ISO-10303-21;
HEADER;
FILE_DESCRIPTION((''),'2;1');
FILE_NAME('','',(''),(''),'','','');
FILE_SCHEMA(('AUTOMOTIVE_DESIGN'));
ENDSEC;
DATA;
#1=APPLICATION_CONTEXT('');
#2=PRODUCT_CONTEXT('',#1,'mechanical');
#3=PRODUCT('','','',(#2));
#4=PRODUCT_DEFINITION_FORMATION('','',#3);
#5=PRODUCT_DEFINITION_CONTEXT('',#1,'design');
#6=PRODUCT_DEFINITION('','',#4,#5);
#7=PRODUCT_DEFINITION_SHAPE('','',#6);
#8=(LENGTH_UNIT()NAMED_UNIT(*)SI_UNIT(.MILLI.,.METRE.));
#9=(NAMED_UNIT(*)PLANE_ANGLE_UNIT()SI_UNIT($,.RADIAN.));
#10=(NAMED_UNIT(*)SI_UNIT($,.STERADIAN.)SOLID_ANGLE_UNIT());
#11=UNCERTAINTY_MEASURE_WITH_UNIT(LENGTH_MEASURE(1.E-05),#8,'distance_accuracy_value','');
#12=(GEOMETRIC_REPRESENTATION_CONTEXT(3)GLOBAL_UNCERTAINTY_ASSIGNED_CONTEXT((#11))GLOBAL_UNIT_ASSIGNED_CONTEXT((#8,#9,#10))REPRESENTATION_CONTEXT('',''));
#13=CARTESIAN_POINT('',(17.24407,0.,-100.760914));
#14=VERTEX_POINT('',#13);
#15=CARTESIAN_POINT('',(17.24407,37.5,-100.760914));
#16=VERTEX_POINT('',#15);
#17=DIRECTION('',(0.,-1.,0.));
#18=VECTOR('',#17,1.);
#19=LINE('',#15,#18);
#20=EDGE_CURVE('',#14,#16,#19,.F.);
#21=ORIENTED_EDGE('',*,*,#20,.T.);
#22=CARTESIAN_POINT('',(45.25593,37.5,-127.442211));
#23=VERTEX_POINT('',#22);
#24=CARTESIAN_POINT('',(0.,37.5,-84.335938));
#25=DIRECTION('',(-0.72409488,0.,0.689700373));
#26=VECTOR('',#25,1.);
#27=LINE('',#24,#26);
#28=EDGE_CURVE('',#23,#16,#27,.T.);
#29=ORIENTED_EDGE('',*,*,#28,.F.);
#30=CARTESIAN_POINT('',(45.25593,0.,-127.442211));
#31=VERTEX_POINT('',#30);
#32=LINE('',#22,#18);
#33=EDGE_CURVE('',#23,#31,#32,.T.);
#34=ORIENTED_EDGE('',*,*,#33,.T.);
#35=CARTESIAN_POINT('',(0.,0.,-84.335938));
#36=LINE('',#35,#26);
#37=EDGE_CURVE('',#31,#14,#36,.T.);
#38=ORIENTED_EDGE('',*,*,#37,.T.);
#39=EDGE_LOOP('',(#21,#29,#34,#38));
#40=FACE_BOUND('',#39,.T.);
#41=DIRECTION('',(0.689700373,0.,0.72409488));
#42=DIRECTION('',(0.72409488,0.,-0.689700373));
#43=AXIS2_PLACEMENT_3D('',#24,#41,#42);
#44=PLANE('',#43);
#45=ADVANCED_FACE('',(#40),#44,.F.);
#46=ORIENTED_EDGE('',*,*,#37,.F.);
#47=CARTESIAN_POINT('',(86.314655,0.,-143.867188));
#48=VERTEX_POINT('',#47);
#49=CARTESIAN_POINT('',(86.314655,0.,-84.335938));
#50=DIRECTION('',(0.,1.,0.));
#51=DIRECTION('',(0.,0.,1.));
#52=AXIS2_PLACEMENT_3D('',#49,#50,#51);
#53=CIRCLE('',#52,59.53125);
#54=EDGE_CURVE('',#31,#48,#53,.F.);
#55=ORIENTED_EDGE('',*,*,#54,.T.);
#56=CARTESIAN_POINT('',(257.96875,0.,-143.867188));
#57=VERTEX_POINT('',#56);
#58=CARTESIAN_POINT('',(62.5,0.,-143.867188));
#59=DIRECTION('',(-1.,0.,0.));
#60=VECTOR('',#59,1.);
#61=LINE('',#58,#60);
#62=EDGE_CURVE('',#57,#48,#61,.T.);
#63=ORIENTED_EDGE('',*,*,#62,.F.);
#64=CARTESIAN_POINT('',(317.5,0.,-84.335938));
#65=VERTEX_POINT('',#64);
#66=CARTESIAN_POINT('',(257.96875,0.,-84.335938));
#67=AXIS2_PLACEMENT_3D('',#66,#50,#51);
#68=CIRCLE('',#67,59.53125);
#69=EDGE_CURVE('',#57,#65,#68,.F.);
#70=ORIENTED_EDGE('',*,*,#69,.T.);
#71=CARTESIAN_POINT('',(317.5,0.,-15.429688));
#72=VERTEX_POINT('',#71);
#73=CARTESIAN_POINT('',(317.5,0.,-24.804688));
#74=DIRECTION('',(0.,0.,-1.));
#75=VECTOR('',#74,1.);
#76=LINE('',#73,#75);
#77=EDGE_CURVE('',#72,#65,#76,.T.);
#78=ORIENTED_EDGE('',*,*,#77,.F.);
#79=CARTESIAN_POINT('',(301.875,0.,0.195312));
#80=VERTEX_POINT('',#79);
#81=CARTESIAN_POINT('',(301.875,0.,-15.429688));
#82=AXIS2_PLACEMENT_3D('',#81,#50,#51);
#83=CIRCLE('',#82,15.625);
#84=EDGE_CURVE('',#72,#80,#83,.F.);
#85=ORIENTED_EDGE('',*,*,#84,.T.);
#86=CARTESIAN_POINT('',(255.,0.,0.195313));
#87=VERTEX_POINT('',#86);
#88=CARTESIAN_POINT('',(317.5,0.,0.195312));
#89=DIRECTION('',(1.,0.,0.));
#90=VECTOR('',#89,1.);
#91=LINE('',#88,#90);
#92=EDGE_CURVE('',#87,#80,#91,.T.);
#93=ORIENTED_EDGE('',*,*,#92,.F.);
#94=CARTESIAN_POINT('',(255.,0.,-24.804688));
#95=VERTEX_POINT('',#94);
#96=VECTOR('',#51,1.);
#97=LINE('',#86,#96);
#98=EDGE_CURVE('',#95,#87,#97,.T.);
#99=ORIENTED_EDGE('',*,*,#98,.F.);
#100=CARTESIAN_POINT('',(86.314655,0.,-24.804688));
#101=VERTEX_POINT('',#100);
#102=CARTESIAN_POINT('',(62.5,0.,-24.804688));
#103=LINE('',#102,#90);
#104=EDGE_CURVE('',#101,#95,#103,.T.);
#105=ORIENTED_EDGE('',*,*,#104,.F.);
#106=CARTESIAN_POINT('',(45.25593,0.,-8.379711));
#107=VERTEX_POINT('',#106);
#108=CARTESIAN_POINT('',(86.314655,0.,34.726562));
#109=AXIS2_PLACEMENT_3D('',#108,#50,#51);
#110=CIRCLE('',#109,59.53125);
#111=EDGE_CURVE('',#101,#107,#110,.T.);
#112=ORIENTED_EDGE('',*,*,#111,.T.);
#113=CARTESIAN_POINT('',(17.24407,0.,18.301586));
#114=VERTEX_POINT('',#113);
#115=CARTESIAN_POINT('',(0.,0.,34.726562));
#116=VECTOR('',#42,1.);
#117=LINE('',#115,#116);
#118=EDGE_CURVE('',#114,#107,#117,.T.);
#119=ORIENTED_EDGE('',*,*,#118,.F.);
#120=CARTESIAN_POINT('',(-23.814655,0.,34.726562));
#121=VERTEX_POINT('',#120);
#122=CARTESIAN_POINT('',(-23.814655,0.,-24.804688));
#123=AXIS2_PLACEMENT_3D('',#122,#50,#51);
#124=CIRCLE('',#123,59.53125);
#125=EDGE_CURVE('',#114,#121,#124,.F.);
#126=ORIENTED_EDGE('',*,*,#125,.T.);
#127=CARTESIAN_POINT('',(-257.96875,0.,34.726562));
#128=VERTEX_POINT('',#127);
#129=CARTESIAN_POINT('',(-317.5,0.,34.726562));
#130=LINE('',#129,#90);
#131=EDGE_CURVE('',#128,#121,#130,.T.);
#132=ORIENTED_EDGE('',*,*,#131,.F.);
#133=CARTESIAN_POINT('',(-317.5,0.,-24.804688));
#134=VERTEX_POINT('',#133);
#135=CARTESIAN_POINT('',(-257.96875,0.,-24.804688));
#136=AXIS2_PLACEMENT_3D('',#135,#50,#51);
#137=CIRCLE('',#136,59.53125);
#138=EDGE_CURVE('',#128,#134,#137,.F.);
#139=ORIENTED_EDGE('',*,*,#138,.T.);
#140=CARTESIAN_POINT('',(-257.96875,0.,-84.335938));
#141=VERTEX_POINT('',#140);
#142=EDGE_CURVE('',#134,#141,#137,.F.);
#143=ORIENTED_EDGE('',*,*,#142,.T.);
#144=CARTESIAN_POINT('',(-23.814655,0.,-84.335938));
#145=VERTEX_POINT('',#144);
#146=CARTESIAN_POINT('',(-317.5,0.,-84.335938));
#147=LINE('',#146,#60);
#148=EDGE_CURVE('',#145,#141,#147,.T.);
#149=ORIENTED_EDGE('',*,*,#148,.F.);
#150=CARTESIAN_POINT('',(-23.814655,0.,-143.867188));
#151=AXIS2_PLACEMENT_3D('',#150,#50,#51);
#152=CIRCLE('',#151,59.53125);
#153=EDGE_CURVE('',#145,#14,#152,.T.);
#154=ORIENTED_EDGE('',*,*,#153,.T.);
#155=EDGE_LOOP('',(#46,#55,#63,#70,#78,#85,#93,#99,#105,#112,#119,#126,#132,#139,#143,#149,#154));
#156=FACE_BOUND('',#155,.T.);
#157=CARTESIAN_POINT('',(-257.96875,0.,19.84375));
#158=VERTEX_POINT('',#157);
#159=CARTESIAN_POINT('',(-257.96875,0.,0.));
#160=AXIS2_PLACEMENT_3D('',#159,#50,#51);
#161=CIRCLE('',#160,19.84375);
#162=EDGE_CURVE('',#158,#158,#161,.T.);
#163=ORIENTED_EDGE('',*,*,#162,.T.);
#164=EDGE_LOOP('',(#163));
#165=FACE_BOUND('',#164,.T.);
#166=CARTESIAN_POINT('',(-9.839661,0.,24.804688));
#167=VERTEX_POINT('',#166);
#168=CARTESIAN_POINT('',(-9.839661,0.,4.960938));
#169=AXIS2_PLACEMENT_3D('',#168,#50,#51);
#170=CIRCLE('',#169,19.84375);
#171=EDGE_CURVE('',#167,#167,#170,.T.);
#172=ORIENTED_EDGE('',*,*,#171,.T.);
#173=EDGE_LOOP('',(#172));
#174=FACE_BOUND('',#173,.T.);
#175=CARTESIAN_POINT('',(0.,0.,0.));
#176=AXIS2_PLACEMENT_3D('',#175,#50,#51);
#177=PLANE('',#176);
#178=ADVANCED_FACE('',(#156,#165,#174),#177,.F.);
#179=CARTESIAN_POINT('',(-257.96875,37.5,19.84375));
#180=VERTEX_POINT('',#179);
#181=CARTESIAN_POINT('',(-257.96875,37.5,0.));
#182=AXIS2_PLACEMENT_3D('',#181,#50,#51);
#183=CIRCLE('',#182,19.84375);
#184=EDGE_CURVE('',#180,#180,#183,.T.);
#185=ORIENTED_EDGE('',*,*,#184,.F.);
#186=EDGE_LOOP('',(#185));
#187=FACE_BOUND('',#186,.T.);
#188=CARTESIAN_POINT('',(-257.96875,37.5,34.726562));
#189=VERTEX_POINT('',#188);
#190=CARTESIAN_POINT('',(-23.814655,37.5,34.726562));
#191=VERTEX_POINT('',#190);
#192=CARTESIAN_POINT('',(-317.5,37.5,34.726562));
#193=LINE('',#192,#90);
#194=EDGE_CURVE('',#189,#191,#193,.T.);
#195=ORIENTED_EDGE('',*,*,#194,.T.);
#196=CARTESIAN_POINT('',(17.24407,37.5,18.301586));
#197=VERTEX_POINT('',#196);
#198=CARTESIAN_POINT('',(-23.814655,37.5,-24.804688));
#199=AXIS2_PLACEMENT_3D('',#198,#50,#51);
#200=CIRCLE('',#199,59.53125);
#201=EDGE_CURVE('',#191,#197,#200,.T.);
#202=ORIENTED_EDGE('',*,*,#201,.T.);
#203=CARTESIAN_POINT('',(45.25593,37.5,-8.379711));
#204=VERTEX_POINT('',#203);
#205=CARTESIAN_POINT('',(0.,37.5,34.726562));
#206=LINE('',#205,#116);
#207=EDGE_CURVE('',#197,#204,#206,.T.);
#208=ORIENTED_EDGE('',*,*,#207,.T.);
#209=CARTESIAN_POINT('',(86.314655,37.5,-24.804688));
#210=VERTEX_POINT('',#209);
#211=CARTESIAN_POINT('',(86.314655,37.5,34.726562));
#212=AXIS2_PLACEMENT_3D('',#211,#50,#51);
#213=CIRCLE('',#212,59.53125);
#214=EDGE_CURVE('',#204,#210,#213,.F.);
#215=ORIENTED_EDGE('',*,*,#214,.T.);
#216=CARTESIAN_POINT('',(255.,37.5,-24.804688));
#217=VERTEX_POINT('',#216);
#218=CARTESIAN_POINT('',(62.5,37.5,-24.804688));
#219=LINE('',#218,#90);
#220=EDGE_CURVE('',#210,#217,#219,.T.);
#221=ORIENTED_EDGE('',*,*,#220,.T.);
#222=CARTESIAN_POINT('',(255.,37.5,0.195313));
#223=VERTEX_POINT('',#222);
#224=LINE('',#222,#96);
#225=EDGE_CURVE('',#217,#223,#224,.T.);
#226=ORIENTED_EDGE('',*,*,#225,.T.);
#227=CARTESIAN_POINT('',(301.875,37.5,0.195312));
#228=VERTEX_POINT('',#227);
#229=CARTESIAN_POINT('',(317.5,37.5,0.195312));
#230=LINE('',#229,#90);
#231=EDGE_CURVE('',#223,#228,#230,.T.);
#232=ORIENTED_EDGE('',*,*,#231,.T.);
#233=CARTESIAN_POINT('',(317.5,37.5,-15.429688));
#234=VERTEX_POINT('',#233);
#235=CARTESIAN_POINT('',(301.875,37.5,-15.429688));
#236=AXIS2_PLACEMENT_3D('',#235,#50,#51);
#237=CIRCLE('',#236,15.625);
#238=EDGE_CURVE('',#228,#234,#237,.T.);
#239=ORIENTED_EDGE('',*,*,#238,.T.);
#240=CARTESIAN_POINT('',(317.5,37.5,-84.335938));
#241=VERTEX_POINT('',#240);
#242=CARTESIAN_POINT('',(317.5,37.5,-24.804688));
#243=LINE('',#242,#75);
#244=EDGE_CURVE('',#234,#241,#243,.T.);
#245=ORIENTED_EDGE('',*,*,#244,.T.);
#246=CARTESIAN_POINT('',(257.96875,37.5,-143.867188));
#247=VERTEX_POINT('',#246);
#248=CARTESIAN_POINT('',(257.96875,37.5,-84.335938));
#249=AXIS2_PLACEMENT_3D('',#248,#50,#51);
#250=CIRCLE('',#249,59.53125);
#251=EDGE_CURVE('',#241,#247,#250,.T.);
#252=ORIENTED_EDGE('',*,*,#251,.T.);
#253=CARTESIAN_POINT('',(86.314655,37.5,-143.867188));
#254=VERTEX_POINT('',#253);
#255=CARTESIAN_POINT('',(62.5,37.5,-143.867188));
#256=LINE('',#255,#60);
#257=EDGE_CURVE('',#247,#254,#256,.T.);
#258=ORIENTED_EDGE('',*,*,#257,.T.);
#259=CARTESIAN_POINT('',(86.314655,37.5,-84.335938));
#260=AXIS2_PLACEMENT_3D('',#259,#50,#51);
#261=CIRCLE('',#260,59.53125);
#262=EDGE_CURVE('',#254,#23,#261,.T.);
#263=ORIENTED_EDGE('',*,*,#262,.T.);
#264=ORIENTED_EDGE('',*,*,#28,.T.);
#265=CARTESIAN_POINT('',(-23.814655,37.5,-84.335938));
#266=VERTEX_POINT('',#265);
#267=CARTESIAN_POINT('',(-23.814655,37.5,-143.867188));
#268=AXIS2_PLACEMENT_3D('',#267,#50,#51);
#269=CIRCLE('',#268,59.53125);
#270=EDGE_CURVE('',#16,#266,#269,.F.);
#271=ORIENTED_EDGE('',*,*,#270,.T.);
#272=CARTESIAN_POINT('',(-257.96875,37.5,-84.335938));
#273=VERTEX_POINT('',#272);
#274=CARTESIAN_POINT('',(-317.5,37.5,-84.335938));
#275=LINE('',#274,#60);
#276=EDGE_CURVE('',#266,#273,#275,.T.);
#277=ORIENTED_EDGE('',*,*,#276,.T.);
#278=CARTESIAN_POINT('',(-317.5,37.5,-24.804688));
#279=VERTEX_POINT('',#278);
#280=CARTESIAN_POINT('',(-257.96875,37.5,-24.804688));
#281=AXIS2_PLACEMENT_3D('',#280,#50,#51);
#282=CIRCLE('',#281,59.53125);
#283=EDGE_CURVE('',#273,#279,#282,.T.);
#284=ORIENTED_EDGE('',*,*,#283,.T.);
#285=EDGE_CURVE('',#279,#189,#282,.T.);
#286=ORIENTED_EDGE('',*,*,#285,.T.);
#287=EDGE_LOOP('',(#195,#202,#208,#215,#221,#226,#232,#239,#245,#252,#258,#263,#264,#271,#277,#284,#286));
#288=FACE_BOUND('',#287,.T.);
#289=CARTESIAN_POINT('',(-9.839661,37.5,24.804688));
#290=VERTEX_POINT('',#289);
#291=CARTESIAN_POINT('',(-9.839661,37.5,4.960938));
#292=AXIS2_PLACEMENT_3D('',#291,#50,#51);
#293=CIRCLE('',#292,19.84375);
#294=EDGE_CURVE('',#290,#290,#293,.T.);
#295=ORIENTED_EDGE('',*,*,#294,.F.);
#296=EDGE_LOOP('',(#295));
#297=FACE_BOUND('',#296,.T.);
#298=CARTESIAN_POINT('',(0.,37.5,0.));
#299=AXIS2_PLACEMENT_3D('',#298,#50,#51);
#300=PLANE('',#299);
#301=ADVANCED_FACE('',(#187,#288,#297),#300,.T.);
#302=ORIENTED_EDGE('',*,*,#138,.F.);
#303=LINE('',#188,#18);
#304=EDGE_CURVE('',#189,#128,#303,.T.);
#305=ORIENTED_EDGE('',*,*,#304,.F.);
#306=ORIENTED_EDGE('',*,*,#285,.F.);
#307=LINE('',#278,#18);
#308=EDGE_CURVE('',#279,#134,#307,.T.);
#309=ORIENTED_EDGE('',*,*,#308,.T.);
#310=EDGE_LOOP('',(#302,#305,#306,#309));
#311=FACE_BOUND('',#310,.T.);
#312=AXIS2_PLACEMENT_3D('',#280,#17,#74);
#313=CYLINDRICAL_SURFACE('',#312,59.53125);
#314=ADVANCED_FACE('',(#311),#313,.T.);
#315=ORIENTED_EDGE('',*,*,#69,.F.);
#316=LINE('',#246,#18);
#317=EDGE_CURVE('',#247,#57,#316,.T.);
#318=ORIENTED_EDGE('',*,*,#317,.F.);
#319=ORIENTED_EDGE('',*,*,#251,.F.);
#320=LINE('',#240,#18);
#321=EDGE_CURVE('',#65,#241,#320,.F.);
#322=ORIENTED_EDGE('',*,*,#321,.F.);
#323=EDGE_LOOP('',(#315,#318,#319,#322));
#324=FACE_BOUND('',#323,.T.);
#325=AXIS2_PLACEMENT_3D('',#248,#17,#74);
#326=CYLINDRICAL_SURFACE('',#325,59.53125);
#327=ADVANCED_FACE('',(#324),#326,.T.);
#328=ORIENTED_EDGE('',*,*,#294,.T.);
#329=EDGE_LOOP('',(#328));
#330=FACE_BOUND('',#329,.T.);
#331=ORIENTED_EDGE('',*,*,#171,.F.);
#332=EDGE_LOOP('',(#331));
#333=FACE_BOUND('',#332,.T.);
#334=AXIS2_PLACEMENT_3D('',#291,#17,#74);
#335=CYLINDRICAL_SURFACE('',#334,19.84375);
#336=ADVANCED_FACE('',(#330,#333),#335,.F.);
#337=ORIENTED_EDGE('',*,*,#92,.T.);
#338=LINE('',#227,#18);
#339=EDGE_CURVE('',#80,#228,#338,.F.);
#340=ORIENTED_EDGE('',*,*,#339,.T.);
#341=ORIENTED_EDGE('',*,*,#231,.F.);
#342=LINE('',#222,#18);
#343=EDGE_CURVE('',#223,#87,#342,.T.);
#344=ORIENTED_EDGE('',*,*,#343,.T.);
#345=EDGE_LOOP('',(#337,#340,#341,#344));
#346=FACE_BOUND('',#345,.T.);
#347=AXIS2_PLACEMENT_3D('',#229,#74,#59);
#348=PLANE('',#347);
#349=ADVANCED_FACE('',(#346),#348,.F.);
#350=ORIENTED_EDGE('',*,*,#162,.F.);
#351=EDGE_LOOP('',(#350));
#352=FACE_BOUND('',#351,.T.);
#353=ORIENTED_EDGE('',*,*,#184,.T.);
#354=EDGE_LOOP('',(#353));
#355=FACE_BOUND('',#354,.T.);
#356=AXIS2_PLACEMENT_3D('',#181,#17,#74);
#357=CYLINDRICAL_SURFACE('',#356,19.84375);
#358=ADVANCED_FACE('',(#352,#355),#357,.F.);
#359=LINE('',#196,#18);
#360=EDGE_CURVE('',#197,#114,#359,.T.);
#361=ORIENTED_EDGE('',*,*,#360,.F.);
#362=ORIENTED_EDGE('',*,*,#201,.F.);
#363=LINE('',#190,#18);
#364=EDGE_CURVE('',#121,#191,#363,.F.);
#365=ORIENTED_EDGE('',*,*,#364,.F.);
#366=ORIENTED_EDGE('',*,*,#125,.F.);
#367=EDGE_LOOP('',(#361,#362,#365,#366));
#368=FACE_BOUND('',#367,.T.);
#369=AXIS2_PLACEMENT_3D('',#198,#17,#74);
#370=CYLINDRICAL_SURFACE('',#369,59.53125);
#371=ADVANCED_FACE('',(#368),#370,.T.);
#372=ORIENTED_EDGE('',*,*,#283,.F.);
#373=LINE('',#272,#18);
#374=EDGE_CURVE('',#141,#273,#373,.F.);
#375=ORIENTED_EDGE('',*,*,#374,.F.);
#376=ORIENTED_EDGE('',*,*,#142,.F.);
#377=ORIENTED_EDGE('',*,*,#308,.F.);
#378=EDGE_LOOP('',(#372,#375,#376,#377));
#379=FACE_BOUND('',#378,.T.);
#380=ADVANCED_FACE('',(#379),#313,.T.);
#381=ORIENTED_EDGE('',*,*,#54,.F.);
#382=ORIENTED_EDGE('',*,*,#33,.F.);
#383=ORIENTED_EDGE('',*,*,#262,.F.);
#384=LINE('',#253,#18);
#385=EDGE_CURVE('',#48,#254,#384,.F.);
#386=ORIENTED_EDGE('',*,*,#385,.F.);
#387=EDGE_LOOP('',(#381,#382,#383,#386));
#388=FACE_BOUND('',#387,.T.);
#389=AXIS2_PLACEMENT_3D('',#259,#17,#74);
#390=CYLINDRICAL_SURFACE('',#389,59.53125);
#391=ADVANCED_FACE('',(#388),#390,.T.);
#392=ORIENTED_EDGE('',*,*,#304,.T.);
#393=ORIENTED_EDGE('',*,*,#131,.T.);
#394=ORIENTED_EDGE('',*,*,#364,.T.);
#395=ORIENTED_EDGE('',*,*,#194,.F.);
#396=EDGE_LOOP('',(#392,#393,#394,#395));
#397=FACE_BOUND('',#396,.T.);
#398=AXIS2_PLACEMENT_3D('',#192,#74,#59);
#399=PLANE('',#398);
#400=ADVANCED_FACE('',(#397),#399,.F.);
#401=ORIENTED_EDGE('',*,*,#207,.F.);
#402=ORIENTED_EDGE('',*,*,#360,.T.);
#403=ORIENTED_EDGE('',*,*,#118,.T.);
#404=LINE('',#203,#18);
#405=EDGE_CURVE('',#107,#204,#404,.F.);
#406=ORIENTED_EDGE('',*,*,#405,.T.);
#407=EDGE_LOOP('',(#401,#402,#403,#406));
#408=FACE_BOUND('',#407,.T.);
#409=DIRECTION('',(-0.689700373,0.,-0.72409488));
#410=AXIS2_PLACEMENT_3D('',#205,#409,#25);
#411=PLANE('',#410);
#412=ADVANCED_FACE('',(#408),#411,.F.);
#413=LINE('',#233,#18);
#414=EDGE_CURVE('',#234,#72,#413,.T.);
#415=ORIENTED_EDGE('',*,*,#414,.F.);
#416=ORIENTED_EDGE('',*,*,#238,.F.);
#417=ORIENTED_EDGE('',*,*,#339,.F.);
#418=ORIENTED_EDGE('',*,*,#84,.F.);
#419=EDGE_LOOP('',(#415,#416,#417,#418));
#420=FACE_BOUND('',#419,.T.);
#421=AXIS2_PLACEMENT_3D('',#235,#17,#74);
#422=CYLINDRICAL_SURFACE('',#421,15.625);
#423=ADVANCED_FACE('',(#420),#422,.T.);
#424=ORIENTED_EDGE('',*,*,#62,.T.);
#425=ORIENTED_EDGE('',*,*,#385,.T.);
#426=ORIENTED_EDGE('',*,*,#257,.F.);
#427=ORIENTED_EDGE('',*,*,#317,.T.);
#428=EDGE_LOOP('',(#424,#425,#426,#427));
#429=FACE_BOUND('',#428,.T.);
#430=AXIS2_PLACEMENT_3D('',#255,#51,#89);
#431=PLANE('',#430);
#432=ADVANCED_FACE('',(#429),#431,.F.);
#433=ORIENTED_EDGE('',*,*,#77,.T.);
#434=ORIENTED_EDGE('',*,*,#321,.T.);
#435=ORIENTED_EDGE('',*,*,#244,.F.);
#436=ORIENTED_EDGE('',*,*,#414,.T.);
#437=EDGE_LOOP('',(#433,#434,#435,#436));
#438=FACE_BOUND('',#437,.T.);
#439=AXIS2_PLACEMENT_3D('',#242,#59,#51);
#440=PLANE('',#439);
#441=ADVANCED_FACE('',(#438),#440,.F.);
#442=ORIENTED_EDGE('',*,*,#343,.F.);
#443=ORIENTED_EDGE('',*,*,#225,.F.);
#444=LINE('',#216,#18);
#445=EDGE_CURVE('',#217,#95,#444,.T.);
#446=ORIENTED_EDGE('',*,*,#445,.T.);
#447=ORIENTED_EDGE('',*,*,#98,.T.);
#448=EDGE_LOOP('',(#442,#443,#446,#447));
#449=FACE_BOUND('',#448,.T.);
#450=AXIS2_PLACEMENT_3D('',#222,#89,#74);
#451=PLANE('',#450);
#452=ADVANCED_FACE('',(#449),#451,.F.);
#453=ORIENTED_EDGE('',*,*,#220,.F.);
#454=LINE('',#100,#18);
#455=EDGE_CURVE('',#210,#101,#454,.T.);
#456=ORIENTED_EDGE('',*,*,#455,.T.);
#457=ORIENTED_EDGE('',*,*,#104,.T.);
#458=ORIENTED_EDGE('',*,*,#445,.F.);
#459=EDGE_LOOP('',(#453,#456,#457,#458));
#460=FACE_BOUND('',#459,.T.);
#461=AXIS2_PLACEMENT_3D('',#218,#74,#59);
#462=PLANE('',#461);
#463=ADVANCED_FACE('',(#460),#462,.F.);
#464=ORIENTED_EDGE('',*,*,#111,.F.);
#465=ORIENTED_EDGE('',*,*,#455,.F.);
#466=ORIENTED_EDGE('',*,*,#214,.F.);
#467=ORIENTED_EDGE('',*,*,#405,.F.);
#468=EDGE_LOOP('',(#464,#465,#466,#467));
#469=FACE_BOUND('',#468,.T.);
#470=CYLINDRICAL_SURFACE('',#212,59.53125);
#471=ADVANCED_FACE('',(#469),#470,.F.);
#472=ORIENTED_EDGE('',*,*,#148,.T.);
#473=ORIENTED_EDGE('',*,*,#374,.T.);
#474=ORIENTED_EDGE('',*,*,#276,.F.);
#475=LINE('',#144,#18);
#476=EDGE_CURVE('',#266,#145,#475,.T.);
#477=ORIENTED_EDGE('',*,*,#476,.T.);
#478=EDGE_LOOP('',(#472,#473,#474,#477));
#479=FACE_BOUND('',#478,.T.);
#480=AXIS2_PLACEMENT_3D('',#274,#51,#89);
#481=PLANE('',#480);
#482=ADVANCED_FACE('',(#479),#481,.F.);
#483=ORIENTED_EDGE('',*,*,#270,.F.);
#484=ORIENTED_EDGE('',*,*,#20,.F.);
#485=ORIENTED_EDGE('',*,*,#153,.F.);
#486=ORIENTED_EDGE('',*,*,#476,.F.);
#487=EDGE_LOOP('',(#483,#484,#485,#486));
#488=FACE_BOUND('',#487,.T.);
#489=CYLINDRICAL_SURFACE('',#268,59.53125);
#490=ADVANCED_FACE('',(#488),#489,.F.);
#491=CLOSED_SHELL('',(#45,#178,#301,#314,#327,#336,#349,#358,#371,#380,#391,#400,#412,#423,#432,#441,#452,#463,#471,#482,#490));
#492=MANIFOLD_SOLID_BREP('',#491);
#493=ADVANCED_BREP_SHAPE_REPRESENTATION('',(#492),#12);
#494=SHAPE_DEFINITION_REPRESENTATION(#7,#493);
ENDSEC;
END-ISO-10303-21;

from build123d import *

# Parameters (mm, degrees)
SKETCH1_R           = 19.84375
BOSS_EXTRUDE1_DEPTH = 37.5
FILLET1_R           = 59.53125
FILLET3_R           = 15.625


with BuildPart() as part:
    # Sketch1 → Boss-Extrude1 (new body)
    with BuildSketch(Plane(origin=(0, 0, 0), x_dir=(1, 0, 0), z_dir=(0, 1, 0))):
        Polygon((-317.5, -34.7265625), (-317.5, 84.3359375), (0, 84.3359375), (62.5, 143.8671875), (317.5, 143.8671875), (317.5, 24.8046875), (317.5, -0.1953125), (255, -0.1953125), (255, 24.8046875), (62.5, 24.8046875), (0, -34.7265625), align=None)
        with Locations(Location((-257.96875, 0, 0), (0, 0, 270))):
            Circle(SKETCH1_R, mode=Mode.SUBTRACT)
        with Locations(Location((-9.839661148, -4.9609375, 0), (0, 0, 270))):
            Circle(SKETCH1_R, mode=Mode.SUBTRACT)
    extrude(amount=BOSS_EXTRUDE1_DEPTH)

    # Fillet1
    fillet1_edges = [part.edges().sort_by_distance(p)[0] for p in [
        (62.5, 18.75, -24.8046875),
        (0, 18.75, 34.7265625),
        (0, 18.75, -84.3359375),
        (62.5, 18.75, -143.8671875),
        (317.5, 18.75, -143.8671875),
        (-317.5, 18.75, 34.7265625),
        (-317.5, 18.75, -84.3359375),
    ]]
    fillet(fillet1_edges, radius=FILLET1_R - 0.0001)  # a hair under: the kernel refuses the full size

    # Fillet3
    fillet3_edges = [part.edges().sort_by_distance(p)[0] for p in [
        (317.5, 18.75, 0.1953125),
    ]]
    fillet(fillet3_edges, radius=FILLET3_R)


solid = part.part
